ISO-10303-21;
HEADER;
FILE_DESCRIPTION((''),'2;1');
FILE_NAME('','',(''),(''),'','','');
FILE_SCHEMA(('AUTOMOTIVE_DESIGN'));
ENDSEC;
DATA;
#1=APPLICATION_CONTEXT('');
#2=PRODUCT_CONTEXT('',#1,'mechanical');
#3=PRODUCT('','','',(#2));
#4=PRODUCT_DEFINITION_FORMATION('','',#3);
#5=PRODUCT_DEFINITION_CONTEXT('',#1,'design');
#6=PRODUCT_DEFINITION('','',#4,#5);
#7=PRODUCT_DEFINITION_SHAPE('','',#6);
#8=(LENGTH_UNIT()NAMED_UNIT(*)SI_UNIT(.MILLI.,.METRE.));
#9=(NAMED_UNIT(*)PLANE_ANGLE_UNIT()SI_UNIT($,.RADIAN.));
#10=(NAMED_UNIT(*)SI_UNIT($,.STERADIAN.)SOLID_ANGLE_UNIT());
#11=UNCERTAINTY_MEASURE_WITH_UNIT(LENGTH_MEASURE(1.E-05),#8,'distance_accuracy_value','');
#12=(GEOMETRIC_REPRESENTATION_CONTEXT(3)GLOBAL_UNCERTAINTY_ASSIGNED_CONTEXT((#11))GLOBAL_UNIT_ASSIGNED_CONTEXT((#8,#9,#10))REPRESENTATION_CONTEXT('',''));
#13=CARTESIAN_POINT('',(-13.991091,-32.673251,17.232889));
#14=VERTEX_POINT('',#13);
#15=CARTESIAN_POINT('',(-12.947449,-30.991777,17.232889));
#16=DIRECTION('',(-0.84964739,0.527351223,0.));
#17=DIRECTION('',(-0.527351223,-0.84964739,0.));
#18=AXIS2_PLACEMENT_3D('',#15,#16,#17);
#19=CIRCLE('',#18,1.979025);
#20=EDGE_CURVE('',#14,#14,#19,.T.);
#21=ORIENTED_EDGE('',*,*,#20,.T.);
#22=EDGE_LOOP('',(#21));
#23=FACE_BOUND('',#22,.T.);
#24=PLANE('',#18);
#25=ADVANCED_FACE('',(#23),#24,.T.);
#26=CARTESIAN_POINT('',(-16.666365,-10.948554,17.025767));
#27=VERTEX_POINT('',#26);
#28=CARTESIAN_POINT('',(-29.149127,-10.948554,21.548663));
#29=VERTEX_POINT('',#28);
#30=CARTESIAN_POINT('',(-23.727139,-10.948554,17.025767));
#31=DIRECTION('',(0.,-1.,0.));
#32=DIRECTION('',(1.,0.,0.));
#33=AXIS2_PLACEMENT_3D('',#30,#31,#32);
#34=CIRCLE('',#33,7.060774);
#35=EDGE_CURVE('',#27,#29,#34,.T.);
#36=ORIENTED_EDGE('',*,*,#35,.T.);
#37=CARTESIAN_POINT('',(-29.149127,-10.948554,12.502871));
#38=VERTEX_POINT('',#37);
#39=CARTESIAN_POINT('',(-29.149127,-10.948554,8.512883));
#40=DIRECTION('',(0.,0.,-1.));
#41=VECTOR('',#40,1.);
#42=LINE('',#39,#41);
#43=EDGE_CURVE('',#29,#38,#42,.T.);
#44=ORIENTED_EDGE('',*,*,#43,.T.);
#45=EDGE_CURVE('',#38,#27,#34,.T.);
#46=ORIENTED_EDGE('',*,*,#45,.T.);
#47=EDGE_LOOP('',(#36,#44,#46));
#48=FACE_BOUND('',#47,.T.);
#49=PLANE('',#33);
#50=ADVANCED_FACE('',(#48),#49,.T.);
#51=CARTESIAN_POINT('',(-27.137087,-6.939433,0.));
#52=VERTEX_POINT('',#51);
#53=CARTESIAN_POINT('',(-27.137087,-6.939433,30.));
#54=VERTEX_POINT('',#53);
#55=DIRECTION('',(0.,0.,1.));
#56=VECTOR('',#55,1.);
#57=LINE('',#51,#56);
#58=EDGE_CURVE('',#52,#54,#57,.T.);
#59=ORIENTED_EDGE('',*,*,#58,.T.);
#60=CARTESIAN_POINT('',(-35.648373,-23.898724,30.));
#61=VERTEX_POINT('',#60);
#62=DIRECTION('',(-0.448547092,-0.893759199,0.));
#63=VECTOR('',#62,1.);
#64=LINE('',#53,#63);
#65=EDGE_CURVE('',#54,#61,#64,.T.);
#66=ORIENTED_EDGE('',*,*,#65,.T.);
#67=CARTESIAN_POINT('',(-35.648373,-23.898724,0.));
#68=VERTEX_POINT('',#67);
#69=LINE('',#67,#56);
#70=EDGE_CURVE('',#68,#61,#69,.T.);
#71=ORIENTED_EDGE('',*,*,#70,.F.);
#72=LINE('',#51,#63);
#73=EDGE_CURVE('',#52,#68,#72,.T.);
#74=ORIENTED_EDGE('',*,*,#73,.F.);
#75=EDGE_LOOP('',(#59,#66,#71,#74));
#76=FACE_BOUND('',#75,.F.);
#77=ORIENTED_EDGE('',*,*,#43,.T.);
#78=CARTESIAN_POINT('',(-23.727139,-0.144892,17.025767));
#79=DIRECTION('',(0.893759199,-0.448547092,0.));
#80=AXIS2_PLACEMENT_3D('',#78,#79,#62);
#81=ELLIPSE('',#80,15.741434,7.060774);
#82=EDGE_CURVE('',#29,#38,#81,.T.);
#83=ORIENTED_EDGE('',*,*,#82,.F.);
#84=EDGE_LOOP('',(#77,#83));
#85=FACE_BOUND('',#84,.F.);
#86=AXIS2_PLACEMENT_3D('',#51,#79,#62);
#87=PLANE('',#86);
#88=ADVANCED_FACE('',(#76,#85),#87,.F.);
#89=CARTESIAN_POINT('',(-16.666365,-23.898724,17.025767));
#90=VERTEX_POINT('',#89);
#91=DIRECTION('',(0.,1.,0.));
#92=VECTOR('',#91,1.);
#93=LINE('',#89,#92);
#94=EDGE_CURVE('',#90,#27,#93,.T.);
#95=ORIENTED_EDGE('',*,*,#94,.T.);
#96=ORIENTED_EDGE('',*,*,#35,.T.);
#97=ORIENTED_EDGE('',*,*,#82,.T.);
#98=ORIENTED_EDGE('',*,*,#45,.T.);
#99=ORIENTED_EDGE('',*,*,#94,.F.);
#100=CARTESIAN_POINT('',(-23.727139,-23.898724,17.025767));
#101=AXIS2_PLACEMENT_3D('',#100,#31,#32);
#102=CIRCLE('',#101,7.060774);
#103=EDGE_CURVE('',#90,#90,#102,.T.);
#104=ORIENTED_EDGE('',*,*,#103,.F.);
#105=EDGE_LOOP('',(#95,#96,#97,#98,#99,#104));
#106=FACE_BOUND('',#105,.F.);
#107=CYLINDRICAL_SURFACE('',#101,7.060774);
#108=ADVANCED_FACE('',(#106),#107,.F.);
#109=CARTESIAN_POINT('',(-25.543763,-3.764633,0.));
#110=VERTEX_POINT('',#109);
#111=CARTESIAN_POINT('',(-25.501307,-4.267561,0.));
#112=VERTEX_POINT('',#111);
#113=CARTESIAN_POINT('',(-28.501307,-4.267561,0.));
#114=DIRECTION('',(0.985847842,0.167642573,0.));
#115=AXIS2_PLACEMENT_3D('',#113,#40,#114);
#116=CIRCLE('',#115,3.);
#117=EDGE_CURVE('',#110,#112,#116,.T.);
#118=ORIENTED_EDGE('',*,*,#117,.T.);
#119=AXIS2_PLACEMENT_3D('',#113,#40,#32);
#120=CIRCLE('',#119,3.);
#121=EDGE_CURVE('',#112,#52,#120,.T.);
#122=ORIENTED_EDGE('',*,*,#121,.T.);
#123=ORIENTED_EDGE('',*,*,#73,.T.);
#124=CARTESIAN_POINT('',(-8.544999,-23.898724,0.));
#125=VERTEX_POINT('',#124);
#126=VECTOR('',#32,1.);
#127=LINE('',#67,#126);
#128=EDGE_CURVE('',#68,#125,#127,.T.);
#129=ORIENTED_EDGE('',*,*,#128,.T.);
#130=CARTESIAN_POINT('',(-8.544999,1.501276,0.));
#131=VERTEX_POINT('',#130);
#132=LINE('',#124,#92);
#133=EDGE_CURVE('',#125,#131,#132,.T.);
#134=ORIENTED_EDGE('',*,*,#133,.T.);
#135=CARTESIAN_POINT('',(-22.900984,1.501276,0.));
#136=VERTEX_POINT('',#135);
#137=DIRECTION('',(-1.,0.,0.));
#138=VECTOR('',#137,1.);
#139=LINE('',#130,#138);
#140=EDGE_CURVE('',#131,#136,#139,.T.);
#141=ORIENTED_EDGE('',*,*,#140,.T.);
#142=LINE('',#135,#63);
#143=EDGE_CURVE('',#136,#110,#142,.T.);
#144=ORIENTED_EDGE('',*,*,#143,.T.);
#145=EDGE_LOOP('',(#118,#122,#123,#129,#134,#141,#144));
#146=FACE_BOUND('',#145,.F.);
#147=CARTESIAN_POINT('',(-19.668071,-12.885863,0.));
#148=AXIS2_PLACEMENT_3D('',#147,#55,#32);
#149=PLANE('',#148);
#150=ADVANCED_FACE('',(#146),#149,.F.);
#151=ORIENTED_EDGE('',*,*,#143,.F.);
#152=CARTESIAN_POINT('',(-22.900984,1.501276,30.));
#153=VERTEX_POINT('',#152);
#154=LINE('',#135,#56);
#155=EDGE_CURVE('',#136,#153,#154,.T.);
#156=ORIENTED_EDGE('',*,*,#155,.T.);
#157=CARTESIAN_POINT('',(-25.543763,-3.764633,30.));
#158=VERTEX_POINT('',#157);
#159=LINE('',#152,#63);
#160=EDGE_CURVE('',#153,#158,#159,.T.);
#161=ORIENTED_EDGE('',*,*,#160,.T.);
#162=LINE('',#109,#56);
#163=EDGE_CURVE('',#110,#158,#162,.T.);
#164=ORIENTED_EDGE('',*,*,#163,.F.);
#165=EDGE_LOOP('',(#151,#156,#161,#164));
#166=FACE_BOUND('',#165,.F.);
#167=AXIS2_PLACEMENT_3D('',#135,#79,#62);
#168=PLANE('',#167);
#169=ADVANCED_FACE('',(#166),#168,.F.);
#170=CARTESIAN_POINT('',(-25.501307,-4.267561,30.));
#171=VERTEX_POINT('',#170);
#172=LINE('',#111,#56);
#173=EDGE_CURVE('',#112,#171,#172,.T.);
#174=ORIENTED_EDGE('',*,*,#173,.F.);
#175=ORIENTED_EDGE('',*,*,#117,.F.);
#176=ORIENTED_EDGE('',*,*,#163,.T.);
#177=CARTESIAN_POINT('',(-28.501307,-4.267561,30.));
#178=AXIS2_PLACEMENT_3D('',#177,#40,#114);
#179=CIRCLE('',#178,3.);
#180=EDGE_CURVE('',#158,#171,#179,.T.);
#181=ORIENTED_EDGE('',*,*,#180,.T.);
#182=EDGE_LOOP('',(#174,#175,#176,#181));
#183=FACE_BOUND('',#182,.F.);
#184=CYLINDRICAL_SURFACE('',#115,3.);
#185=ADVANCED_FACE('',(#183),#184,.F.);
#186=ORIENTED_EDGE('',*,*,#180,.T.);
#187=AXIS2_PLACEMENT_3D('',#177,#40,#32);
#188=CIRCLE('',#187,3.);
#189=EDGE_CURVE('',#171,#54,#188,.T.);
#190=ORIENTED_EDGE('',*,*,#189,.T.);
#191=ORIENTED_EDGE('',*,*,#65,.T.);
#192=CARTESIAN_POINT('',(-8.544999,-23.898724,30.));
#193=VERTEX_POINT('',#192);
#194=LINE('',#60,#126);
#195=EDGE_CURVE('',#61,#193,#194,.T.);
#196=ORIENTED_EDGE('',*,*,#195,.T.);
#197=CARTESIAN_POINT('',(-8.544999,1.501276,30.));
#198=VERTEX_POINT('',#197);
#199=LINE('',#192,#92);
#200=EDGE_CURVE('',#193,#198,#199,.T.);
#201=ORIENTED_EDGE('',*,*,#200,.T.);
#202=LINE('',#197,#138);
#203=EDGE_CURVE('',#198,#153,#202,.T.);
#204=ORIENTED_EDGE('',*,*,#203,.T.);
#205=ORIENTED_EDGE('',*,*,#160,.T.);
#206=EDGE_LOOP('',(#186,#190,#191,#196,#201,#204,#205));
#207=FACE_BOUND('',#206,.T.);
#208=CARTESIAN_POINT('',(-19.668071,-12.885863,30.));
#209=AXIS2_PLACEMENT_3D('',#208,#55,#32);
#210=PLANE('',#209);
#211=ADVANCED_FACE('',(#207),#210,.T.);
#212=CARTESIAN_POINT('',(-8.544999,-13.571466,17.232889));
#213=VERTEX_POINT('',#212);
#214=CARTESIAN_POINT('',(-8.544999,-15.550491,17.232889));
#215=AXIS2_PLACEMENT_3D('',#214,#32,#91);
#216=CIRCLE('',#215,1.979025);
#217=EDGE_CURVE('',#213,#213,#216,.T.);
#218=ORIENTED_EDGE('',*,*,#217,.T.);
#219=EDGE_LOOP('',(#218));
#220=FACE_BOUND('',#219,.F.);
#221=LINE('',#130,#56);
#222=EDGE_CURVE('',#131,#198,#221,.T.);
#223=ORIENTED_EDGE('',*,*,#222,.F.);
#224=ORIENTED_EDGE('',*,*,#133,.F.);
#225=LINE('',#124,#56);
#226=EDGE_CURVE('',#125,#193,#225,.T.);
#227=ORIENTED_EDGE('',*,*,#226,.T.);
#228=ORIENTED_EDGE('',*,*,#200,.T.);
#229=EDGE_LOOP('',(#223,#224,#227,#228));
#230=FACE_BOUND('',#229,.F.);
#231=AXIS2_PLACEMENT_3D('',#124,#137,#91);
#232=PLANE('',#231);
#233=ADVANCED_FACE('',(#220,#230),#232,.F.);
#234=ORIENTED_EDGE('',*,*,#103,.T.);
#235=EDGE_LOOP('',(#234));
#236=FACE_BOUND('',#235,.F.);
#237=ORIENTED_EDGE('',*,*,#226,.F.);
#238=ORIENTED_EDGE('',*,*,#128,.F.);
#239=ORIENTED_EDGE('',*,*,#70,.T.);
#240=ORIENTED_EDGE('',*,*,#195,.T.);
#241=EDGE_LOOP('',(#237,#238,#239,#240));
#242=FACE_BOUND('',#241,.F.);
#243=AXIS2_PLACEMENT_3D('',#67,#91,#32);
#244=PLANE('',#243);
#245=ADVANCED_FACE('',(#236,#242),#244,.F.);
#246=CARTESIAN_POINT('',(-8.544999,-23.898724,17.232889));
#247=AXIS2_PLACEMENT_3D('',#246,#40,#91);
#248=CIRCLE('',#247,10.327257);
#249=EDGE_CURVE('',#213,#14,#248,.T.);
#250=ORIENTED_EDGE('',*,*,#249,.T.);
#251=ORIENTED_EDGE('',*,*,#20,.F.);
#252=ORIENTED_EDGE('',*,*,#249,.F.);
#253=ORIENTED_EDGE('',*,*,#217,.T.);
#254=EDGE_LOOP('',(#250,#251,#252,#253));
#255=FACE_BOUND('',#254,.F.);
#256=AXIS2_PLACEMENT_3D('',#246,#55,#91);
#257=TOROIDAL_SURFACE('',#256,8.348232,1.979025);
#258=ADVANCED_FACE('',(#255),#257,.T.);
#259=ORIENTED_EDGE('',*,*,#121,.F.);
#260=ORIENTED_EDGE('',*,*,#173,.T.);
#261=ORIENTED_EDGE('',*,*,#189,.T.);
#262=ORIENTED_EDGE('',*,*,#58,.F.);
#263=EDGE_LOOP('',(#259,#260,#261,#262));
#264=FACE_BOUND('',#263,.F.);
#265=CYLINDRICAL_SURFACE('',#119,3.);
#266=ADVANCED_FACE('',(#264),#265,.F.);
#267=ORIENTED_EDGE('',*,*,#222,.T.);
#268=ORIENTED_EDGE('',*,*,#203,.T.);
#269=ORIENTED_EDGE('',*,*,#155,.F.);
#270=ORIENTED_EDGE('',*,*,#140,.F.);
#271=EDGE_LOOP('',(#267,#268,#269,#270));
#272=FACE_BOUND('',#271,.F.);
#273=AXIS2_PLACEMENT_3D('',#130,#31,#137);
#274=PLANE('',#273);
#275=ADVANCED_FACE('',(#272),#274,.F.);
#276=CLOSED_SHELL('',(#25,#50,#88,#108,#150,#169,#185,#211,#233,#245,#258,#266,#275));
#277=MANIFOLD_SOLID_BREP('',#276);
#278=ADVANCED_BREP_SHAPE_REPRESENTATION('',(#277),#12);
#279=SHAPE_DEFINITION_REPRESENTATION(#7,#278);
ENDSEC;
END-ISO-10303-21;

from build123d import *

# Parameters (mm, degrees)
F1_DEPTH = 30
F2_R     = 7.0607743661
F3_DEPTH = 12.95017
F4_R     = 1.9790251597
F5_ANGLE = 211.8266616901


# Not quite as in the source:
# - a feature of the source that left no trace in its solid (it failed there, or was rolled back) is left out


with BuildPart() as f1:
    # F0 (on Top) → F1 (new body)
    with BuildSketch(Plane.XY):
        with BuildLine():
            Line((-8.5449986998, 1.5012763055), (-22.9009841796, 1.5012763055))
            Line((-22.9009841796, 1.5012763055), (-25.5437633875, -3.7646328319))
            ThreePointArc((-25.5437633875, -3.7646328319), (-25.5119398754, -4.015202253), (-25.5013069136, -4.2675605514))
            ThreePointArc((-25.5013069136, -4.2675605514), (-25.9427272038, -5.8339799934), (-27.1370868258, -6.9394332191))
            Line((-27.1370868258, -6.9394332191), (-35.6483731166, -23.8987236945))
            Line((-35.6483731166, -23.8987236945), (-8.5449986998, -23.8987236945))
            Line((-8.5449986998, -23.8987236945), (-8.5449986998, 1.5012763055))
        make_face()
    extrude(amount=F1_DEPTH)

    # F2 (on face) → F3 (cut)
    with BuildSketch(Plane.XZ.offset(23.8987236945)):
        with Locations((-23.7271394581, 17.0257668942)):
            Circle(F2_R)
    extrude(amount=-F3_DEPTH, mode=Mode.SUBTRACT)

    # F4 (on face) → F5 (revolve)
    with BuildSketch(Plane.YZ.offset(-8.5449986998)):
        with Locations((-15.5504914001, 17.2328893095)):
            Circle(F4_R)
    revolve(axis=Axis((-8.5449986998, -23.8987236945, 15), (0, 0, -1)), revolution_arc=F5_ANGLE)


solid = f1.part
